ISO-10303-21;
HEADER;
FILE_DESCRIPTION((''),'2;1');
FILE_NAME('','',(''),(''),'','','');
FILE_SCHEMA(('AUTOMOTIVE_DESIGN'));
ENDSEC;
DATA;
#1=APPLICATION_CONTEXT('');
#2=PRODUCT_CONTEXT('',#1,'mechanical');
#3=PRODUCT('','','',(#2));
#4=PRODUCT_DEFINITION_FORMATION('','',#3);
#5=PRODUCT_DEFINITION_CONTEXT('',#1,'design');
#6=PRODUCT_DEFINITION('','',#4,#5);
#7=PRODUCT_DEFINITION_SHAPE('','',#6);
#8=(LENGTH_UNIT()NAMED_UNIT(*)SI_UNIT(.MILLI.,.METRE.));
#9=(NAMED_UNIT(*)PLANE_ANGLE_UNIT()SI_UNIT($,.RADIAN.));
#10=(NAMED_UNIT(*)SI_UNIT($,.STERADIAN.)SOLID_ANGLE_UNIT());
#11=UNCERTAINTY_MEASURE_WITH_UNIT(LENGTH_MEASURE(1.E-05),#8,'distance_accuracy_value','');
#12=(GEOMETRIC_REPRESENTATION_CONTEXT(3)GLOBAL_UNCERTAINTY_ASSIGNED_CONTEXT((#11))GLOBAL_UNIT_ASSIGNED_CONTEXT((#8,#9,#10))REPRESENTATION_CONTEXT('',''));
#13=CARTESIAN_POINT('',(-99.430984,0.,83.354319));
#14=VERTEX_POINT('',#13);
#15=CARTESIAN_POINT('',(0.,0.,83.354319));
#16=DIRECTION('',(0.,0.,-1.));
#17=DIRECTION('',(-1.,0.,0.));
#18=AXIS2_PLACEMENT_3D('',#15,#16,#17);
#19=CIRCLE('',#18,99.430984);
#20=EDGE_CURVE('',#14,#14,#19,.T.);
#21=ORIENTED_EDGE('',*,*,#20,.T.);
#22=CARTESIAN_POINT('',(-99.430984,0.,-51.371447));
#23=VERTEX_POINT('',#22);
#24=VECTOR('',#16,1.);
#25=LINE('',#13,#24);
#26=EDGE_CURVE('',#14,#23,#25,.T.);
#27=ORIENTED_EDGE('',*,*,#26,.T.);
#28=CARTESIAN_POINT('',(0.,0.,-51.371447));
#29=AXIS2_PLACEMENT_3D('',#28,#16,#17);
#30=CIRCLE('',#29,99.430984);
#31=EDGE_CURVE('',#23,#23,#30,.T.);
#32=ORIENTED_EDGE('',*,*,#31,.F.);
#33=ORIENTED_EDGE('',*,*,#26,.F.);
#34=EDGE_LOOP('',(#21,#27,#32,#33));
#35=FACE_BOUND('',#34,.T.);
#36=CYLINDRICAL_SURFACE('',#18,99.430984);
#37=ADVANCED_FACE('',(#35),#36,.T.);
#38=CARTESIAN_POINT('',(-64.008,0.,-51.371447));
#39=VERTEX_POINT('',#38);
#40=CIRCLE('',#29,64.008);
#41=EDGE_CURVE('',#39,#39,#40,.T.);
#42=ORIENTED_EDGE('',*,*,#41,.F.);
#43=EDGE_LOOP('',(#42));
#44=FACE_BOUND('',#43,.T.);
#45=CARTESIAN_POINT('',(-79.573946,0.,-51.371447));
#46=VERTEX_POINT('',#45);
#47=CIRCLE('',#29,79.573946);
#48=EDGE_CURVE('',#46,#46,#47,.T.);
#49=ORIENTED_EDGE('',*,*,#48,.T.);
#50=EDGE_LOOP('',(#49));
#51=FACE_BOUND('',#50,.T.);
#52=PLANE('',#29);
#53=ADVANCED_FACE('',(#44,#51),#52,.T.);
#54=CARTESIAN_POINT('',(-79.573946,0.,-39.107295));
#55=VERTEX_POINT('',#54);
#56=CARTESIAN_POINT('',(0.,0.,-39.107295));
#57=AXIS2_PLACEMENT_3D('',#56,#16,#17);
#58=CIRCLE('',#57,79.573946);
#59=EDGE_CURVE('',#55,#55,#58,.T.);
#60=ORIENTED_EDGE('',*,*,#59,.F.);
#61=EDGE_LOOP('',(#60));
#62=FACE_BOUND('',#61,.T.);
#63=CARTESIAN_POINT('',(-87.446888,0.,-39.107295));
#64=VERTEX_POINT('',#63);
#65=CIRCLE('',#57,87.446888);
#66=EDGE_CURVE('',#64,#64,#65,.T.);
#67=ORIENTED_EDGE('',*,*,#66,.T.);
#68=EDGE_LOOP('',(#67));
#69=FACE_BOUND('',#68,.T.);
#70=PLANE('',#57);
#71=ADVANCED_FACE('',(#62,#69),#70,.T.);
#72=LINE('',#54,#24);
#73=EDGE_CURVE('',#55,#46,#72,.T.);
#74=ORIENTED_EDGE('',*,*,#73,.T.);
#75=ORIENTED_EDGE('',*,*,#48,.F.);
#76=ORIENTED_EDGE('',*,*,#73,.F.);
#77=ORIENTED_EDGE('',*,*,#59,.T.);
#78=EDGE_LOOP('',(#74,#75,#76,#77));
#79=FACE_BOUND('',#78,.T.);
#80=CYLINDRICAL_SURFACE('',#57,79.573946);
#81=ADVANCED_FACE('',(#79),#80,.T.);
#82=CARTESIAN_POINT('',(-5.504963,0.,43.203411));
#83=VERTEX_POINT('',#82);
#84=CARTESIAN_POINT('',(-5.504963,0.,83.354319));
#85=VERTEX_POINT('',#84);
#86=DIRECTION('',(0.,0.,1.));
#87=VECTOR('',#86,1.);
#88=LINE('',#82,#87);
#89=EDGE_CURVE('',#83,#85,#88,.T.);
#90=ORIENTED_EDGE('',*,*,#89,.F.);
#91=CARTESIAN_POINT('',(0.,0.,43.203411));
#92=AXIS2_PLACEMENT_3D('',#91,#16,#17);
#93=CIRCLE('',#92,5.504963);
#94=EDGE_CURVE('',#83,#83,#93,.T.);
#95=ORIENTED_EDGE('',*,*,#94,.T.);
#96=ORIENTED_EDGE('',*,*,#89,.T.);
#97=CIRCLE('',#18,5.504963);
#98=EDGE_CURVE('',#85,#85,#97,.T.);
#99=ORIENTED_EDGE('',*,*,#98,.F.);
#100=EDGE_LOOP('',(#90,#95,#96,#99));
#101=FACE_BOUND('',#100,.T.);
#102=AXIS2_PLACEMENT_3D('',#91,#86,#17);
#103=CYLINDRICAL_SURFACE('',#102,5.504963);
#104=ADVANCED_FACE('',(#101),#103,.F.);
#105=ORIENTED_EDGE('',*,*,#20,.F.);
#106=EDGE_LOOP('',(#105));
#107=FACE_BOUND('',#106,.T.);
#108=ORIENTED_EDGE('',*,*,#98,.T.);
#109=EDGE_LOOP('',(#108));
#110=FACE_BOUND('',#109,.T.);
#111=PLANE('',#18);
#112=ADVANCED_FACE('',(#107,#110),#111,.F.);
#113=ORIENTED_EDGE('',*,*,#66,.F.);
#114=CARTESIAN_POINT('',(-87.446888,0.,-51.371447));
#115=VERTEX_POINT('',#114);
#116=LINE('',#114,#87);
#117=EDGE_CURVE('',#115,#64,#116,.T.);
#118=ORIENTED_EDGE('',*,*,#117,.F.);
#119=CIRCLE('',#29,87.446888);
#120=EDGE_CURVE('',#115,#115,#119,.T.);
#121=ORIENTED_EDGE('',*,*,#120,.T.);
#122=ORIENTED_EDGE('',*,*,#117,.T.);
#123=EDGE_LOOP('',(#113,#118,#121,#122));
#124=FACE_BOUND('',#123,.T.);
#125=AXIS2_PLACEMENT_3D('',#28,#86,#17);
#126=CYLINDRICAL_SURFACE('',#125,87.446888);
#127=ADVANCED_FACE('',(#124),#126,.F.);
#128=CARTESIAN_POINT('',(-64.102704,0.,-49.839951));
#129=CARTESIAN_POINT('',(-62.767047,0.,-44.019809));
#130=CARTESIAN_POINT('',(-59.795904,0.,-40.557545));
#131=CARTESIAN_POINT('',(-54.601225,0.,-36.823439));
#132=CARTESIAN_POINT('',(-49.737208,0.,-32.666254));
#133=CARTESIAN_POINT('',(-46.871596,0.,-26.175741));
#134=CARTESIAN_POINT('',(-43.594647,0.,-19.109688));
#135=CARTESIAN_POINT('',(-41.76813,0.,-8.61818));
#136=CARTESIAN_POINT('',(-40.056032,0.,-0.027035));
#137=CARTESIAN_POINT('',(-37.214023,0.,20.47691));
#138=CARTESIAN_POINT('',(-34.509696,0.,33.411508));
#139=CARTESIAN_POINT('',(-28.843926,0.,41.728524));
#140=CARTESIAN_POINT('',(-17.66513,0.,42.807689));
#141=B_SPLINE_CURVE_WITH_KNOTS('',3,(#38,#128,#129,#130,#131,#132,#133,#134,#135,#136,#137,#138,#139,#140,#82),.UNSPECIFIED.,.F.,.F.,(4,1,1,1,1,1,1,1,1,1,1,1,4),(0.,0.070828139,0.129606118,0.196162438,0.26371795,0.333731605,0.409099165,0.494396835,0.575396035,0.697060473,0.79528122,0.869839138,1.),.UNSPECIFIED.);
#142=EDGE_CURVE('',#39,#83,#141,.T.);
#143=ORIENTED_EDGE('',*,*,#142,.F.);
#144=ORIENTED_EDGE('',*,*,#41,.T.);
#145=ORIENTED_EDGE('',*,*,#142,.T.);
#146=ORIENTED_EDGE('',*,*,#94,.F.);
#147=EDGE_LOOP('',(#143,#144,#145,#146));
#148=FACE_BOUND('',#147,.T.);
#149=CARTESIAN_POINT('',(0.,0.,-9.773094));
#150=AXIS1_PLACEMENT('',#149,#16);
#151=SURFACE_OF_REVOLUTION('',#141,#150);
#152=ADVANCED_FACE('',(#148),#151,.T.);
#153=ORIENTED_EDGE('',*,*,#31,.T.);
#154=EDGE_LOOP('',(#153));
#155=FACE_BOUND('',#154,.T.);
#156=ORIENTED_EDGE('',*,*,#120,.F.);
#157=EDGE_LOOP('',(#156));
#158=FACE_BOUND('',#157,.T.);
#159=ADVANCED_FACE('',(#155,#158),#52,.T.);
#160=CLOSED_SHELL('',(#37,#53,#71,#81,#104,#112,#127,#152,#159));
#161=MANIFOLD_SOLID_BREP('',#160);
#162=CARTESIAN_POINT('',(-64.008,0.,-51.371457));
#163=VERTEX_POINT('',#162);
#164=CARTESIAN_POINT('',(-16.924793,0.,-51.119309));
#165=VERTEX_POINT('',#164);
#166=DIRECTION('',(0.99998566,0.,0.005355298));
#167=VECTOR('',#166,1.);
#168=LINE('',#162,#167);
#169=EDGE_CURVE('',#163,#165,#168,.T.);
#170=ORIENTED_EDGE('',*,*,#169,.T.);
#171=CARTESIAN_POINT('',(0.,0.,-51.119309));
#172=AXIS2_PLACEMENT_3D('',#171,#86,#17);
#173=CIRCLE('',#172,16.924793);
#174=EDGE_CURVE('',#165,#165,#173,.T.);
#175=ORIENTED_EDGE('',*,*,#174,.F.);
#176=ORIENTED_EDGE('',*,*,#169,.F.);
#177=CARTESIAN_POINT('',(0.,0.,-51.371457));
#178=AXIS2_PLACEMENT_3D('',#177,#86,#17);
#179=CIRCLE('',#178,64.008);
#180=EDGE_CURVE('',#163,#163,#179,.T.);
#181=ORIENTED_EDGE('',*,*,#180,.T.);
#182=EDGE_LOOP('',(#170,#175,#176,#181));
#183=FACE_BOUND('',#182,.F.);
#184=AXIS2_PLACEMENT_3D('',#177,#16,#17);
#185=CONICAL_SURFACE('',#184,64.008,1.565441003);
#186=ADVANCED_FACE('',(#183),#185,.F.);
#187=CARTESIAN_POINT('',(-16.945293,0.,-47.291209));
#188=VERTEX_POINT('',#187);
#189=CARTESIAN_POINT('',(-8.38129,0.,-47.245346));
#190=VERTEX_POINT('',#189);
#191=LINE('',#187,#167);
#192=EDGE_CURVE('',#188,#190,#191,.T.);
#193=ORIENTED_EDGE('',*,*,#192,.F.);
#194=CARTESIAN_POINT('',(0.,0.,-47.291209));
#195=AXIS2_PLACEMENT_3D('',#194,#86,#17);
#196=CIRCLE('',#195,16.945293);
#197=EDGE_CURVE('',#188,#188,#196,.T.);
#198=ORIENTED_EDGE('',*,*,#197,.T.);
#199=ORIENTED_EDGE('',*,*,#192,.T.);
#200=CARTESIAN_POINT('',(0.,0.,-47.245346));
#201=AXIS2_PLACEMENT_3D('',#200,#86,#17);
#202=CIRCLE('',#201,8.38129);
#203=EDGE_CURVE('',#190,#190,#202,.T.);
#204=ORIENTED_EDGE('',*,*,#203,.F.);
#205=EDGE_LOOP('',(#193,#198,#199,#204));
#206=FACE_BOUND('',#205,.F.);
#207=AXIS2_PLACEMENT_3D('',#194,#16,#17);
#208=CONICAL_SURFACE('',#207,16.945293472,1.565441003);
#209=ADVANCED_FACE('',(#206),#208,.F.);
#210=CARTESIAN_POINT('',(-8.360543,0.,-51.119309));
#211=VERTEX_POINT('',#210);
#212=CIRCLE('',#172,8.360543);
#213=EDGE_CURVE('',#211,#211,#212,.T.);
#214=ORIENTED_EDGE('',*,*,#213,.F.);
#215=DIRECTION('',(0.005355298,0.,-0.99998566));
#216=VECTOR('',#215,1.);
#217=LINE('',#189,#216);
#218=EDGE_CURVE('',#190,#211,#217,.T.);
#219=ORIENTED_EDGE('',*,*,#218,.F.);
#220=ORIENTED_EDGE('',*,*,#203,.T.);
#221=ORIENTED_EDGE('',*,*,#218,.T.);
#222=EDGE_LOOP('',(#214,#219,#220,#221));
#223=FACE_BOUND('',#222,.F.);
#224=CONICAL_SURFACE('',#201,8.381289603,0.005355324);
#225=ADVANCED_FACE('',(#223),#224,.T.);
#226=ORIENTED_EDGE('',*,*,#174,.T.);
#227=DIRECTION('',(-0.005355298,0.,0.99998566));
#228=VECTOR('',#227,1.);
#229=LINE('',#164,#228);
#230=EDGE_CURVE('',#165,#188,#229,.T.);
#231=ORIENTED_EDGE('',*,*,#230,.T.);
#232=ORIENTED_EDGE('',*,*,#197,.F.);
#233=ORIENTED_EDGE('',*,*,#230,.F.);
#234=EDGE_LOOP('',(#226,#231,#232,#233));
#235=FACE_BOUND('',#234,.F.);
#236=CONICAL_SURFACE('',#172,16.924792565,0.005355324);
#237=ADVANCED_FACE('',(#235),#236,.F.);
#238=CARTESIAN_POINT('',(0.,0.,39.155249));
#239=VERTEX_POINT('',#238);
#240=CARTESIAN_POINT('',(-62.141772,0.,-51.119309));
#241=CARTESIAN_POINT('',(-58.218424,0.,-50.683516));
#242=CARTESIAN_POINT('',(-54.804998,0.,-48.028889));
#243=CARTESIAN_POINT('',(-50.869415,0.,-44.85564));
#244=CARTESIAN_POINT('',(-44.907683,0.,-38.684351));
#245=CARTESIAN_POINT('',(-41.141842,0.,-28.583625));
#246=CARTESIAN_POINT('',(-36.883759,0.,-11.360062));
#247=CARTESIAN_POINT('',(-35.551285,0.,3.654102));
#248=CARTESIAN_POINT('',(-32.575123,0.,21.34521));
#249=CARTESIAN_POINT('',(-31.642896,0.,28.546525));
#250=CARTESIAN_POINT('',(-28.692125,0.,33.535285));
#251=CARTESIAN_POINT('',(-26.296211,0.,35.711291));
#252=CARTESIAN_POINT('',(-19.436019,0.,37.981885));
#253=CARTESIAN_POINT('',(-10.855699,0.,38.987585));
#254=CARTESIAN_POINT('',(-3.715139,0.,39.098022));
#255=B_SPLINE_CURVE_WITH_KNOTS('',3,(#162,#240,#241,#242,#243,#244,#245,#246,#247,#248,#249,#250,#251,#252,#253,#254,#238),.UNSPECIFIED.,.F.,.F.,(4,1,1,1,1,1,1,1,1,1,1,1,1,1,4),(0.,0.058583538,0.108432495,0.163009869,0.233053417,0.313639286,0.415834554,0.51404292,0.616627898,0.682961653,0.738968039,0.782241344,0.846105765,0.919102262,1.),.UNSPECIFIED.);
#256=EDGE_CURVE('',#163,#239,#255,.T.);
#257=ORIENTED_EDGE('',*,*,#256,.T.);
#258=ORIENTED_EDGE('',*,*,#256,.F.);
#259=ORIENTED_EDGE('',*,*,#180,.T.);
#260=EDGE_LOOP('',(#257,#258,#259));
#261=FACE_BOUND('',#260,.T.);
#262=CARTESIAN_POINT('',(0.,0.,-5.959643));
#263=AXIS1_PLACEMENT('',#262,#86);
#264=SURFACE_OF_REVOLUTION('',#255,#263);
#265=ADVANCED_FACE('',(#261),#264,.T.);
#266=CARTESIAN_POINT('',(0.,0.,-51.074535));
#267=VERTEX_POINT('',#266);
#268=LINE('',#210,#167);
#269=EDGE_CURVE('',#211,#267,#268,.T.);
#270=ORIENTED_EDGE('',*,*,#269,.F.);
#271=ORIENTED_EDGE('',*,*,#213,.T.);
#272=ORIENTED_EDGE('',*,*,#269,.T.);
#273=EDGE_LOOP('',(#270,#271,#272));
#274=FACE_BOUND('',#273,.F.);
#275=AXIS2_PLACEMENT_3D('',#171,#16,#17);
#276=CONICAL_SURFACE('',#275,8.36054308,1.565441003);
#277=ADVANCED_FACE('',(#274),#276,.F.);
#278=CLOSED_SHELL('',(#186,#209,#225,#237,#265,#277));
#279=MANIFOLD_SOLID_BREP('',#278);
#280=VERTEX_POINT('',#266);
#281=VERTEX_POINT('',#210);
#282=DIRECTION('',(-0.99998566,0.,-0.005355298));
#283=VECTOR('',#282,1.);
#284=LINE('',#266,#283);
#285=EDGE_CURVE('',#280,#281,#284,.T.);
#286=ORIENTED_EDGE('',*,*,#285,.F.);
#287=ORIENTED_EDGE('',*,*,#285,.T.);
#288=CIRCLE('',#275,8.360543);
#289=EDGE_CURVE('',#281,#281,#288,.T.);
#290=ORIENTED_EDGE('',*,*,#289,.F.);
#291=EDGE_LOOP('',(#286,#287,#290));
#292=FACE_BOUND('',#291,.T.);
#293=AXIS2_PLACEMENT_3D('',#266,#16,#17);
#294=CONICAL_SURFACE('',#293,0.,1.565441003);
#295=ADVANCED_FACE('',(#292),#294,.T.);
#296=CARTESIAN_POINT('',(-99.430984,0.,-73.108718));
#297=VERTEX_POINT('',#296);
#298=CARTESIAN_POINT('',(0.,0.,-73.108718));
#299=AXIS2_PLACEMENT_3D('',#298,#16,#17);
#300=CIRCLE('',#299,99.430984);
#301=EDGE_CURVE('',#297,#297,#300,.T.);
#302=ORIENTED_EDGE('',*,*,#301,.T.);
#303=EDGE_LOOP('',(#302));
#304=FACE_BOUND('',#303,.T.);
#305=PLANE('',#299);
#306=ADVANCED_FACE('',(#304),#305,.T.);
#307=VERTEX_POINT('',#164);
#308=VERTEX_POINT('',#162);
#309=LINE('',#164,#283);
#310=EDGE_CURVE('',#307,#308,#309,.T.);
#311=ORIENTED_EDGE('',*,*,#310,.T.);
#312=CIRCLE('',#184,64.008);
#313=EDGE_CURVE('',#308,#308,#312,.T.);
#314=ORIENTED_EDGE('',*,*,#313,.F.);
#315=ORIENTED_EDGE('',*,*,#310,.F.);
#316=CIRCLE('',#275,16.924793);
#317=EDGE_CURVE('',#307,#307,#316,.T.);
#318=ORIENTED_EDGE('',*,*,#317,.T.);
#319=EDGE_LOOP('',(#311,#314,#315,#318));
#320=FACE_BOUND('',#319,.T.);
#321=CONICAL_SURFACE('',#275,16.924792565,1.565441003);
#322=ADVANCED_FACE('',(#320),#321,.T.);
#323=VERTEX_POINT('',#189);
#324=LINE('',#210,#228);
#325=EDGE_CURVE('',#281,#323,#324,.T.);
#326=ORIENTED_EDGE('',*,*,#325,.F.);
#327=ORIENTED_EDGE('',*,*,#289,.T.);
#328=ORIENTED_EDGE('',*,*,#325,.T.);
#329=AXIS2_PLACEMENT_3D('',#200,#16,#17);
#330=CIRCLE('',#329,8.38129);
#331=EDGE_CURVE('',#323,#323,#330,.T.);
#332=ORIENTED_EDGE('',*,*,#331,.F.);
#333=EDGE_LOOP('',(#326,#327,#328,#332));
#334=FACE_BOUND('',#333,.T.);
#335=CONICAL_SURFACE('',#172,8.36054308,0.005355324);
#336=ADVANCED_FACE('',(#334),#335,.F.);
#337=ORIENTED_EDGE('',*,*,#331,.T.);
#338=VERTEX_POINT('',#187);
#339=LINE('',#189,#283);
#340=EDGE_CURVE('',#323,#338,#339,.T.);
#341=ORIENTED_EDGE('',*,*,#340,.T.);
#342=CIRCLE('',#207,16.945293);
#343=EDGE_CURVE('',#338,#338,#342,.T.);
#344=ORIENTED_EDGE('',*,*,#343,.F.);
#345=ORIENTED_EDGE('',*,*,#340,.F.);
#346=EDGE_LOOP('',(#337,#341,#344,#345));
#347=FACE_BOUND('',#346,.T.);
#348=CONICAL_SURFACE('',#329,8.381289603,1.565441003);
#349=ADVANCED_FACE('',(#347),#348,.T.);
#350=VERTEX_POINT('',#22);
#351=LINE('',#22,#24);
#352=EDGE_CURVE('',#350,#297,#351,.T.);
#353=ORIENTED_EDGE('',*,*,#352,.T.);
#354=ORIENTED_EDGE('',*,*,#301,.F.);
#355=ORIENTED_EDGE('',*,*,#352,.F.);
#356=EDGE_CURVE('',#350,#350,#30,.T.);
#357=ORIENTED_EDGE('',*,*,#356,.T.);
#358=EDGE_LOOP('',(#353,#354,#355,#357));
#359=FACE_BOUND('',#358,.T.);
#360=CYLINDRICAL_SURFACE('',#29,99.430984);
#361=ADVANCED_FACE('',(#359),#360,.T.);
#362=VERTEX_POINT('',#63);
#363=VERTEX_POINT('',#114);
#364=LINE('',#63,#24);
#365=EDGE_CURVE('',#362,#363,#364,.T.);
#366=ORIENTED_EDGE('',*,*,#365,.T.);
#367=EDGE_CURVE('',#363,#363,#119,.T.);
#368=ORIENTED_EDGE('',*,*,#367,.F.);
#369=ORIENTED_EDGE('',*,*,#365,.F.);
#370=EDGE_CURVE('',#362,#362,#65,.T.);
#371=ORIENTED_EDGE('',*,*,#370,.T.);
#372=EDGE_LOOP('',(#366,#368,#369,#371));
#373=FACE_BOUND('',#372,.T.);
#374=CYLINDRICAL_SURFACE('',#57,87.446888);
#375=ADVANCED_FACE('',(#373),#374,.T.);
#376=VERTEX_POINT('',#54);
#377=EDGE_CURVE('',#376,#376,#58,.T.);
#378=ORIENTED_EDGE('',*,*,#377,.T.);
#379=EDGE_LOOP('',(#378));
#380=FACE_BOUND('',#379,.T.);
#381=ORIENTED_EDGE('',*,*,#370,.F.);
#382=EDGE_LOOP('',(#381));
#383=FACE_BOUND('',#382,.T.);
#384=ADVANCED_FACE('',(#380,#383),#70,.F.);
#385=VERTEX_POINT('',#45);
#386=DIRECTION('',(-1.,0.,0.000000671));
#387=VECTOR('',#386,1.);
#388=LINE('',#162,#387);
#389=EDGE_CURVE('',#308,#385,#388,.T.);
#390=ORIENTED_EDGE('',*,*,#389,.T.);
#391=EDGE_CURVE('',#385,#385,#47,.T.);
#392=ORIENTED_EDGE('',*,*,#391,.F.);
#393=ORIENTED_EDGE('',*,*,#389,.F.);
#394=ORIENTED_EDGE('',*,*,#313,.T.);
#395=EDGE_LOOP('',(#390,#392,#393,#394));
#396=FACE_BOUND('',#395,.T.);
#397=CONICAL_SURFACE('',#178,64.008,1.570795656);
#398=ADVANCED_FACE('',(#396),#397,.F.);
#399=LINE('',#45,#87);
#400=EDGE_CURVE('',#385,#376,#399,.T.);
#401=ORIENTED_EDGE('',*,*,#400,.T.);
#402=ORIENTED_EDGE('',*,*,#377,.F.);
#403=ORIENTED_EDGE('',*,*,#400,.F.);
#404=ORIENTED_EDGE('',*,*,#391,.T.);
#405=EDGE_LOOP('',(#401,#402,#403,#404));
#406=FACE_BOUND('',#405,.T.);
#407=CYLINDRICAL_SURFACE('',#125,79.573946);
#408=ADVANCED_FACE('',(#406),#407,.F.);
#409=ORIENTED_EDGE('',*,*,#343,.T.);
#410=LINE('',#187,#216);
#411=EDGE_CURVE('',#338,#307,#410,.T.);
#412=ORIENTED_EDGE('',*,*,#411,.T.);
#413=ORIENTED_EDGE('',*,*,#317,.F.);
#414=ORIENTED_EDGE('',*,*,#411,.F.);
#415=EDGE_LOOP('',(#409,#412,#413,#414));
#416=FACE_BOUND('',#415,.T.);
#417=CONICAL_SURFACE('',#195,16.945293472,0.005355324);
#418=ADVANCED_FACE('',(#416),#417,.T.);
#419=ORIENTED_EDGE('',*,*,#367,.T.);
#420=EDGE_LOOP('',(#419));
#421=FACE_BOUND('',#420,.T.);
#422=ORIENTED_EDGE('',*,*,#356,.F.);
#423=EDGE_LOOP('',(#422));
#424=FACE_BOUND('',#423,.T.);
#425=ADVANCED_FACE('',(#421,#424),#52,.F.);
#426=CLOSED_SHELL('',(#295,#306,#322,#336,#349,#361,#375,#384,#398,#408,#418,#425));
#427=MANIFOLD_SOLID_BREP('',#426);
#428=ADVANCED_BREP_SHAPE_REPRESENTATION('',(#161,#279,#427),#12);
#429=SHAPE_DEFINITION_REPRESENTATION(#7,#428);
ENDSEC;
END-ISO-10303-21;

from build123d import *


# Not quite as in the source:
# - ends of sketch curves that miss each other by under 0.0002 mm in the source are joined


with BuildPart() as f1:
    # F0 (on Front) → F1 (revolve)
    with BuildSketch(Plane.XZ):
        with BuildLine():
            Line((-5.5049625925, 43.2034109984), (-5.5049625925, 83.3543194161))
            Line((-5.5049625925, 83.3543194161), (-99.4309840389, 83.3543194161))
            Line((-99.4309840389, 83.3543194161), (-99.4309840389, -51.3714465576))
            Line((-99.4309840389, -51.3714465576), (-87.4468881672, -51.3714465576))
            Line((-87.4468881672, -51.3714465576), (-87.4468881672, -39.1072945867))
            Line((-87.4468881672, -39.1072945867), (-79.5739456842, -39.1072945867))
            Line((-79.5739456842, -39.1072945867), (-79.5739456842, -51.3714465576))
            Line((-79.5739456842, -51.3714465576), (-64.008, -51.3714465576))
            add(Edge.make_bspline(
                [(-64.008, -51.3714465576), (-64.1027038454, -49.839950803), (-62.7670473342, -44.0198094824), (-59.795903973, -40.557544581), (-54.6012246924, -36.8234386179), (-49.7372082623, -32.6662543777), (-46.8715955049, -26.175741387), (-43.5946465593, -19.1096878414), (-41.7681298564, -8.6181796833), (-40.0560318039, -0.0270351042), (-37.2140229768, 20.4769103307), (-34.5096956961, 33.4115075529), (-28.8439262592, 41.7285244533), (-17.6651301621, 42.8076889627), (-5.5049625925, 43.2034109984)],
                knots=[0, 0, 0, 0, 0.0708281388, 0.1296061177, 0.1961624378, 0.26371795, 0.3337316046, 0.4090991647, 0.494396835, 0.5753960354, 0.6970604735, 0.79528122, 0.8698391379, 1, 1, 1, 1], degree=3))
        make_face()
    revolve(axis=Axis((0, 0, -9.7730937459), (0, 0, -1)))


with BuildPart() as f3:
    # F2 (on Front) → F3 (revolve)
    with BuildSketch(Plane.XZ):
        with BuildLine():
            add(Edge.make_bspline(
                [(-64.008, -51.3714570016), (-62.1417719206, -51.1193087771), (-58.2184243409, -50.6835159057), (-54.80499818, -48.0288890525), (-50.869415203, -44.8556398767), (-44.9076833426, -38.6843511379), (-41.1418422638, -28.5836251876), (-36.8837585479, -11.3600621188), (-35.5512845454, 3.654102122), (-32.5751230407, 21.3452100724), (-31.6428957309, 28.546524663), (-28.6921245131, 33.535284546), (-26.2962108333, 35.7112909355), (-19.4360185112, 37.9818852252), (-10.8556993698, 38.9875847862), (-3.7151385315, 39.0980221276), (0, 39.1552485526)],
                knots=[0, 0, 0, 0, 0.0585835377, 0.1084324952, 0.1630098689, 0.2330534173, 0.3136392856, 0.4158345544, 0.5140429199, 0.6166278982, 0.6829616528, 0.7389680389, 0.7822413443, 0.8461057652, 0.9191022622, 1, 1, 1, 1], degree=3))
            Line((-64.008, -51.3714570016), (-16.9247925652, -51.1193087771))
            Line((-16.9247925652, -51.1193087771), (-16.9452934719, -47.2912094683))
            Line((-16.9452934719, -47.2912094683), (-8.3812896029, -47.2453460174))
            Line((-8.3812896029, -47.2453460174), (-8.3605430802, -51.1193087771))
            Line((-8.3605430802, -51.1193087771), (0, -51.074534935))
            Line((0, -51.074534935), (0, 39.1552485526))
        make_face()
    revolve(axis=Axis((0, 0, -5.9596431912), (0, 0, 1)))


with BuildPart() as f5:
    # F4 (on Front) → F5 (revolve)
    with BuildSketch(Plane.XZ):
        Polygon((-87.4468881672, -51.3714465576), (-99.4309840389, -51.3714465576), (-99.4309840389, -73.1087177992), (0, -73.1087177992), (0, -51.074534935), (-8.3605430802, -51.1193087771), (-8.3812896029, -47.2453460174), (-16.9452934719, -47.2912094683), (-16.9247925652, -51.1193087771), (-64.008, -51.3714570016), (-79.5739456842, -51.3714465576), (-79.5739456842, -39.1072945867), (-87.4468881672, -39.1072945867), align=None)
    revolve(axis=Axis((0, 0, -120.2870681882), (0, 0, -1)))


solid = Compound([f1.part, f3.part, f5.part])
